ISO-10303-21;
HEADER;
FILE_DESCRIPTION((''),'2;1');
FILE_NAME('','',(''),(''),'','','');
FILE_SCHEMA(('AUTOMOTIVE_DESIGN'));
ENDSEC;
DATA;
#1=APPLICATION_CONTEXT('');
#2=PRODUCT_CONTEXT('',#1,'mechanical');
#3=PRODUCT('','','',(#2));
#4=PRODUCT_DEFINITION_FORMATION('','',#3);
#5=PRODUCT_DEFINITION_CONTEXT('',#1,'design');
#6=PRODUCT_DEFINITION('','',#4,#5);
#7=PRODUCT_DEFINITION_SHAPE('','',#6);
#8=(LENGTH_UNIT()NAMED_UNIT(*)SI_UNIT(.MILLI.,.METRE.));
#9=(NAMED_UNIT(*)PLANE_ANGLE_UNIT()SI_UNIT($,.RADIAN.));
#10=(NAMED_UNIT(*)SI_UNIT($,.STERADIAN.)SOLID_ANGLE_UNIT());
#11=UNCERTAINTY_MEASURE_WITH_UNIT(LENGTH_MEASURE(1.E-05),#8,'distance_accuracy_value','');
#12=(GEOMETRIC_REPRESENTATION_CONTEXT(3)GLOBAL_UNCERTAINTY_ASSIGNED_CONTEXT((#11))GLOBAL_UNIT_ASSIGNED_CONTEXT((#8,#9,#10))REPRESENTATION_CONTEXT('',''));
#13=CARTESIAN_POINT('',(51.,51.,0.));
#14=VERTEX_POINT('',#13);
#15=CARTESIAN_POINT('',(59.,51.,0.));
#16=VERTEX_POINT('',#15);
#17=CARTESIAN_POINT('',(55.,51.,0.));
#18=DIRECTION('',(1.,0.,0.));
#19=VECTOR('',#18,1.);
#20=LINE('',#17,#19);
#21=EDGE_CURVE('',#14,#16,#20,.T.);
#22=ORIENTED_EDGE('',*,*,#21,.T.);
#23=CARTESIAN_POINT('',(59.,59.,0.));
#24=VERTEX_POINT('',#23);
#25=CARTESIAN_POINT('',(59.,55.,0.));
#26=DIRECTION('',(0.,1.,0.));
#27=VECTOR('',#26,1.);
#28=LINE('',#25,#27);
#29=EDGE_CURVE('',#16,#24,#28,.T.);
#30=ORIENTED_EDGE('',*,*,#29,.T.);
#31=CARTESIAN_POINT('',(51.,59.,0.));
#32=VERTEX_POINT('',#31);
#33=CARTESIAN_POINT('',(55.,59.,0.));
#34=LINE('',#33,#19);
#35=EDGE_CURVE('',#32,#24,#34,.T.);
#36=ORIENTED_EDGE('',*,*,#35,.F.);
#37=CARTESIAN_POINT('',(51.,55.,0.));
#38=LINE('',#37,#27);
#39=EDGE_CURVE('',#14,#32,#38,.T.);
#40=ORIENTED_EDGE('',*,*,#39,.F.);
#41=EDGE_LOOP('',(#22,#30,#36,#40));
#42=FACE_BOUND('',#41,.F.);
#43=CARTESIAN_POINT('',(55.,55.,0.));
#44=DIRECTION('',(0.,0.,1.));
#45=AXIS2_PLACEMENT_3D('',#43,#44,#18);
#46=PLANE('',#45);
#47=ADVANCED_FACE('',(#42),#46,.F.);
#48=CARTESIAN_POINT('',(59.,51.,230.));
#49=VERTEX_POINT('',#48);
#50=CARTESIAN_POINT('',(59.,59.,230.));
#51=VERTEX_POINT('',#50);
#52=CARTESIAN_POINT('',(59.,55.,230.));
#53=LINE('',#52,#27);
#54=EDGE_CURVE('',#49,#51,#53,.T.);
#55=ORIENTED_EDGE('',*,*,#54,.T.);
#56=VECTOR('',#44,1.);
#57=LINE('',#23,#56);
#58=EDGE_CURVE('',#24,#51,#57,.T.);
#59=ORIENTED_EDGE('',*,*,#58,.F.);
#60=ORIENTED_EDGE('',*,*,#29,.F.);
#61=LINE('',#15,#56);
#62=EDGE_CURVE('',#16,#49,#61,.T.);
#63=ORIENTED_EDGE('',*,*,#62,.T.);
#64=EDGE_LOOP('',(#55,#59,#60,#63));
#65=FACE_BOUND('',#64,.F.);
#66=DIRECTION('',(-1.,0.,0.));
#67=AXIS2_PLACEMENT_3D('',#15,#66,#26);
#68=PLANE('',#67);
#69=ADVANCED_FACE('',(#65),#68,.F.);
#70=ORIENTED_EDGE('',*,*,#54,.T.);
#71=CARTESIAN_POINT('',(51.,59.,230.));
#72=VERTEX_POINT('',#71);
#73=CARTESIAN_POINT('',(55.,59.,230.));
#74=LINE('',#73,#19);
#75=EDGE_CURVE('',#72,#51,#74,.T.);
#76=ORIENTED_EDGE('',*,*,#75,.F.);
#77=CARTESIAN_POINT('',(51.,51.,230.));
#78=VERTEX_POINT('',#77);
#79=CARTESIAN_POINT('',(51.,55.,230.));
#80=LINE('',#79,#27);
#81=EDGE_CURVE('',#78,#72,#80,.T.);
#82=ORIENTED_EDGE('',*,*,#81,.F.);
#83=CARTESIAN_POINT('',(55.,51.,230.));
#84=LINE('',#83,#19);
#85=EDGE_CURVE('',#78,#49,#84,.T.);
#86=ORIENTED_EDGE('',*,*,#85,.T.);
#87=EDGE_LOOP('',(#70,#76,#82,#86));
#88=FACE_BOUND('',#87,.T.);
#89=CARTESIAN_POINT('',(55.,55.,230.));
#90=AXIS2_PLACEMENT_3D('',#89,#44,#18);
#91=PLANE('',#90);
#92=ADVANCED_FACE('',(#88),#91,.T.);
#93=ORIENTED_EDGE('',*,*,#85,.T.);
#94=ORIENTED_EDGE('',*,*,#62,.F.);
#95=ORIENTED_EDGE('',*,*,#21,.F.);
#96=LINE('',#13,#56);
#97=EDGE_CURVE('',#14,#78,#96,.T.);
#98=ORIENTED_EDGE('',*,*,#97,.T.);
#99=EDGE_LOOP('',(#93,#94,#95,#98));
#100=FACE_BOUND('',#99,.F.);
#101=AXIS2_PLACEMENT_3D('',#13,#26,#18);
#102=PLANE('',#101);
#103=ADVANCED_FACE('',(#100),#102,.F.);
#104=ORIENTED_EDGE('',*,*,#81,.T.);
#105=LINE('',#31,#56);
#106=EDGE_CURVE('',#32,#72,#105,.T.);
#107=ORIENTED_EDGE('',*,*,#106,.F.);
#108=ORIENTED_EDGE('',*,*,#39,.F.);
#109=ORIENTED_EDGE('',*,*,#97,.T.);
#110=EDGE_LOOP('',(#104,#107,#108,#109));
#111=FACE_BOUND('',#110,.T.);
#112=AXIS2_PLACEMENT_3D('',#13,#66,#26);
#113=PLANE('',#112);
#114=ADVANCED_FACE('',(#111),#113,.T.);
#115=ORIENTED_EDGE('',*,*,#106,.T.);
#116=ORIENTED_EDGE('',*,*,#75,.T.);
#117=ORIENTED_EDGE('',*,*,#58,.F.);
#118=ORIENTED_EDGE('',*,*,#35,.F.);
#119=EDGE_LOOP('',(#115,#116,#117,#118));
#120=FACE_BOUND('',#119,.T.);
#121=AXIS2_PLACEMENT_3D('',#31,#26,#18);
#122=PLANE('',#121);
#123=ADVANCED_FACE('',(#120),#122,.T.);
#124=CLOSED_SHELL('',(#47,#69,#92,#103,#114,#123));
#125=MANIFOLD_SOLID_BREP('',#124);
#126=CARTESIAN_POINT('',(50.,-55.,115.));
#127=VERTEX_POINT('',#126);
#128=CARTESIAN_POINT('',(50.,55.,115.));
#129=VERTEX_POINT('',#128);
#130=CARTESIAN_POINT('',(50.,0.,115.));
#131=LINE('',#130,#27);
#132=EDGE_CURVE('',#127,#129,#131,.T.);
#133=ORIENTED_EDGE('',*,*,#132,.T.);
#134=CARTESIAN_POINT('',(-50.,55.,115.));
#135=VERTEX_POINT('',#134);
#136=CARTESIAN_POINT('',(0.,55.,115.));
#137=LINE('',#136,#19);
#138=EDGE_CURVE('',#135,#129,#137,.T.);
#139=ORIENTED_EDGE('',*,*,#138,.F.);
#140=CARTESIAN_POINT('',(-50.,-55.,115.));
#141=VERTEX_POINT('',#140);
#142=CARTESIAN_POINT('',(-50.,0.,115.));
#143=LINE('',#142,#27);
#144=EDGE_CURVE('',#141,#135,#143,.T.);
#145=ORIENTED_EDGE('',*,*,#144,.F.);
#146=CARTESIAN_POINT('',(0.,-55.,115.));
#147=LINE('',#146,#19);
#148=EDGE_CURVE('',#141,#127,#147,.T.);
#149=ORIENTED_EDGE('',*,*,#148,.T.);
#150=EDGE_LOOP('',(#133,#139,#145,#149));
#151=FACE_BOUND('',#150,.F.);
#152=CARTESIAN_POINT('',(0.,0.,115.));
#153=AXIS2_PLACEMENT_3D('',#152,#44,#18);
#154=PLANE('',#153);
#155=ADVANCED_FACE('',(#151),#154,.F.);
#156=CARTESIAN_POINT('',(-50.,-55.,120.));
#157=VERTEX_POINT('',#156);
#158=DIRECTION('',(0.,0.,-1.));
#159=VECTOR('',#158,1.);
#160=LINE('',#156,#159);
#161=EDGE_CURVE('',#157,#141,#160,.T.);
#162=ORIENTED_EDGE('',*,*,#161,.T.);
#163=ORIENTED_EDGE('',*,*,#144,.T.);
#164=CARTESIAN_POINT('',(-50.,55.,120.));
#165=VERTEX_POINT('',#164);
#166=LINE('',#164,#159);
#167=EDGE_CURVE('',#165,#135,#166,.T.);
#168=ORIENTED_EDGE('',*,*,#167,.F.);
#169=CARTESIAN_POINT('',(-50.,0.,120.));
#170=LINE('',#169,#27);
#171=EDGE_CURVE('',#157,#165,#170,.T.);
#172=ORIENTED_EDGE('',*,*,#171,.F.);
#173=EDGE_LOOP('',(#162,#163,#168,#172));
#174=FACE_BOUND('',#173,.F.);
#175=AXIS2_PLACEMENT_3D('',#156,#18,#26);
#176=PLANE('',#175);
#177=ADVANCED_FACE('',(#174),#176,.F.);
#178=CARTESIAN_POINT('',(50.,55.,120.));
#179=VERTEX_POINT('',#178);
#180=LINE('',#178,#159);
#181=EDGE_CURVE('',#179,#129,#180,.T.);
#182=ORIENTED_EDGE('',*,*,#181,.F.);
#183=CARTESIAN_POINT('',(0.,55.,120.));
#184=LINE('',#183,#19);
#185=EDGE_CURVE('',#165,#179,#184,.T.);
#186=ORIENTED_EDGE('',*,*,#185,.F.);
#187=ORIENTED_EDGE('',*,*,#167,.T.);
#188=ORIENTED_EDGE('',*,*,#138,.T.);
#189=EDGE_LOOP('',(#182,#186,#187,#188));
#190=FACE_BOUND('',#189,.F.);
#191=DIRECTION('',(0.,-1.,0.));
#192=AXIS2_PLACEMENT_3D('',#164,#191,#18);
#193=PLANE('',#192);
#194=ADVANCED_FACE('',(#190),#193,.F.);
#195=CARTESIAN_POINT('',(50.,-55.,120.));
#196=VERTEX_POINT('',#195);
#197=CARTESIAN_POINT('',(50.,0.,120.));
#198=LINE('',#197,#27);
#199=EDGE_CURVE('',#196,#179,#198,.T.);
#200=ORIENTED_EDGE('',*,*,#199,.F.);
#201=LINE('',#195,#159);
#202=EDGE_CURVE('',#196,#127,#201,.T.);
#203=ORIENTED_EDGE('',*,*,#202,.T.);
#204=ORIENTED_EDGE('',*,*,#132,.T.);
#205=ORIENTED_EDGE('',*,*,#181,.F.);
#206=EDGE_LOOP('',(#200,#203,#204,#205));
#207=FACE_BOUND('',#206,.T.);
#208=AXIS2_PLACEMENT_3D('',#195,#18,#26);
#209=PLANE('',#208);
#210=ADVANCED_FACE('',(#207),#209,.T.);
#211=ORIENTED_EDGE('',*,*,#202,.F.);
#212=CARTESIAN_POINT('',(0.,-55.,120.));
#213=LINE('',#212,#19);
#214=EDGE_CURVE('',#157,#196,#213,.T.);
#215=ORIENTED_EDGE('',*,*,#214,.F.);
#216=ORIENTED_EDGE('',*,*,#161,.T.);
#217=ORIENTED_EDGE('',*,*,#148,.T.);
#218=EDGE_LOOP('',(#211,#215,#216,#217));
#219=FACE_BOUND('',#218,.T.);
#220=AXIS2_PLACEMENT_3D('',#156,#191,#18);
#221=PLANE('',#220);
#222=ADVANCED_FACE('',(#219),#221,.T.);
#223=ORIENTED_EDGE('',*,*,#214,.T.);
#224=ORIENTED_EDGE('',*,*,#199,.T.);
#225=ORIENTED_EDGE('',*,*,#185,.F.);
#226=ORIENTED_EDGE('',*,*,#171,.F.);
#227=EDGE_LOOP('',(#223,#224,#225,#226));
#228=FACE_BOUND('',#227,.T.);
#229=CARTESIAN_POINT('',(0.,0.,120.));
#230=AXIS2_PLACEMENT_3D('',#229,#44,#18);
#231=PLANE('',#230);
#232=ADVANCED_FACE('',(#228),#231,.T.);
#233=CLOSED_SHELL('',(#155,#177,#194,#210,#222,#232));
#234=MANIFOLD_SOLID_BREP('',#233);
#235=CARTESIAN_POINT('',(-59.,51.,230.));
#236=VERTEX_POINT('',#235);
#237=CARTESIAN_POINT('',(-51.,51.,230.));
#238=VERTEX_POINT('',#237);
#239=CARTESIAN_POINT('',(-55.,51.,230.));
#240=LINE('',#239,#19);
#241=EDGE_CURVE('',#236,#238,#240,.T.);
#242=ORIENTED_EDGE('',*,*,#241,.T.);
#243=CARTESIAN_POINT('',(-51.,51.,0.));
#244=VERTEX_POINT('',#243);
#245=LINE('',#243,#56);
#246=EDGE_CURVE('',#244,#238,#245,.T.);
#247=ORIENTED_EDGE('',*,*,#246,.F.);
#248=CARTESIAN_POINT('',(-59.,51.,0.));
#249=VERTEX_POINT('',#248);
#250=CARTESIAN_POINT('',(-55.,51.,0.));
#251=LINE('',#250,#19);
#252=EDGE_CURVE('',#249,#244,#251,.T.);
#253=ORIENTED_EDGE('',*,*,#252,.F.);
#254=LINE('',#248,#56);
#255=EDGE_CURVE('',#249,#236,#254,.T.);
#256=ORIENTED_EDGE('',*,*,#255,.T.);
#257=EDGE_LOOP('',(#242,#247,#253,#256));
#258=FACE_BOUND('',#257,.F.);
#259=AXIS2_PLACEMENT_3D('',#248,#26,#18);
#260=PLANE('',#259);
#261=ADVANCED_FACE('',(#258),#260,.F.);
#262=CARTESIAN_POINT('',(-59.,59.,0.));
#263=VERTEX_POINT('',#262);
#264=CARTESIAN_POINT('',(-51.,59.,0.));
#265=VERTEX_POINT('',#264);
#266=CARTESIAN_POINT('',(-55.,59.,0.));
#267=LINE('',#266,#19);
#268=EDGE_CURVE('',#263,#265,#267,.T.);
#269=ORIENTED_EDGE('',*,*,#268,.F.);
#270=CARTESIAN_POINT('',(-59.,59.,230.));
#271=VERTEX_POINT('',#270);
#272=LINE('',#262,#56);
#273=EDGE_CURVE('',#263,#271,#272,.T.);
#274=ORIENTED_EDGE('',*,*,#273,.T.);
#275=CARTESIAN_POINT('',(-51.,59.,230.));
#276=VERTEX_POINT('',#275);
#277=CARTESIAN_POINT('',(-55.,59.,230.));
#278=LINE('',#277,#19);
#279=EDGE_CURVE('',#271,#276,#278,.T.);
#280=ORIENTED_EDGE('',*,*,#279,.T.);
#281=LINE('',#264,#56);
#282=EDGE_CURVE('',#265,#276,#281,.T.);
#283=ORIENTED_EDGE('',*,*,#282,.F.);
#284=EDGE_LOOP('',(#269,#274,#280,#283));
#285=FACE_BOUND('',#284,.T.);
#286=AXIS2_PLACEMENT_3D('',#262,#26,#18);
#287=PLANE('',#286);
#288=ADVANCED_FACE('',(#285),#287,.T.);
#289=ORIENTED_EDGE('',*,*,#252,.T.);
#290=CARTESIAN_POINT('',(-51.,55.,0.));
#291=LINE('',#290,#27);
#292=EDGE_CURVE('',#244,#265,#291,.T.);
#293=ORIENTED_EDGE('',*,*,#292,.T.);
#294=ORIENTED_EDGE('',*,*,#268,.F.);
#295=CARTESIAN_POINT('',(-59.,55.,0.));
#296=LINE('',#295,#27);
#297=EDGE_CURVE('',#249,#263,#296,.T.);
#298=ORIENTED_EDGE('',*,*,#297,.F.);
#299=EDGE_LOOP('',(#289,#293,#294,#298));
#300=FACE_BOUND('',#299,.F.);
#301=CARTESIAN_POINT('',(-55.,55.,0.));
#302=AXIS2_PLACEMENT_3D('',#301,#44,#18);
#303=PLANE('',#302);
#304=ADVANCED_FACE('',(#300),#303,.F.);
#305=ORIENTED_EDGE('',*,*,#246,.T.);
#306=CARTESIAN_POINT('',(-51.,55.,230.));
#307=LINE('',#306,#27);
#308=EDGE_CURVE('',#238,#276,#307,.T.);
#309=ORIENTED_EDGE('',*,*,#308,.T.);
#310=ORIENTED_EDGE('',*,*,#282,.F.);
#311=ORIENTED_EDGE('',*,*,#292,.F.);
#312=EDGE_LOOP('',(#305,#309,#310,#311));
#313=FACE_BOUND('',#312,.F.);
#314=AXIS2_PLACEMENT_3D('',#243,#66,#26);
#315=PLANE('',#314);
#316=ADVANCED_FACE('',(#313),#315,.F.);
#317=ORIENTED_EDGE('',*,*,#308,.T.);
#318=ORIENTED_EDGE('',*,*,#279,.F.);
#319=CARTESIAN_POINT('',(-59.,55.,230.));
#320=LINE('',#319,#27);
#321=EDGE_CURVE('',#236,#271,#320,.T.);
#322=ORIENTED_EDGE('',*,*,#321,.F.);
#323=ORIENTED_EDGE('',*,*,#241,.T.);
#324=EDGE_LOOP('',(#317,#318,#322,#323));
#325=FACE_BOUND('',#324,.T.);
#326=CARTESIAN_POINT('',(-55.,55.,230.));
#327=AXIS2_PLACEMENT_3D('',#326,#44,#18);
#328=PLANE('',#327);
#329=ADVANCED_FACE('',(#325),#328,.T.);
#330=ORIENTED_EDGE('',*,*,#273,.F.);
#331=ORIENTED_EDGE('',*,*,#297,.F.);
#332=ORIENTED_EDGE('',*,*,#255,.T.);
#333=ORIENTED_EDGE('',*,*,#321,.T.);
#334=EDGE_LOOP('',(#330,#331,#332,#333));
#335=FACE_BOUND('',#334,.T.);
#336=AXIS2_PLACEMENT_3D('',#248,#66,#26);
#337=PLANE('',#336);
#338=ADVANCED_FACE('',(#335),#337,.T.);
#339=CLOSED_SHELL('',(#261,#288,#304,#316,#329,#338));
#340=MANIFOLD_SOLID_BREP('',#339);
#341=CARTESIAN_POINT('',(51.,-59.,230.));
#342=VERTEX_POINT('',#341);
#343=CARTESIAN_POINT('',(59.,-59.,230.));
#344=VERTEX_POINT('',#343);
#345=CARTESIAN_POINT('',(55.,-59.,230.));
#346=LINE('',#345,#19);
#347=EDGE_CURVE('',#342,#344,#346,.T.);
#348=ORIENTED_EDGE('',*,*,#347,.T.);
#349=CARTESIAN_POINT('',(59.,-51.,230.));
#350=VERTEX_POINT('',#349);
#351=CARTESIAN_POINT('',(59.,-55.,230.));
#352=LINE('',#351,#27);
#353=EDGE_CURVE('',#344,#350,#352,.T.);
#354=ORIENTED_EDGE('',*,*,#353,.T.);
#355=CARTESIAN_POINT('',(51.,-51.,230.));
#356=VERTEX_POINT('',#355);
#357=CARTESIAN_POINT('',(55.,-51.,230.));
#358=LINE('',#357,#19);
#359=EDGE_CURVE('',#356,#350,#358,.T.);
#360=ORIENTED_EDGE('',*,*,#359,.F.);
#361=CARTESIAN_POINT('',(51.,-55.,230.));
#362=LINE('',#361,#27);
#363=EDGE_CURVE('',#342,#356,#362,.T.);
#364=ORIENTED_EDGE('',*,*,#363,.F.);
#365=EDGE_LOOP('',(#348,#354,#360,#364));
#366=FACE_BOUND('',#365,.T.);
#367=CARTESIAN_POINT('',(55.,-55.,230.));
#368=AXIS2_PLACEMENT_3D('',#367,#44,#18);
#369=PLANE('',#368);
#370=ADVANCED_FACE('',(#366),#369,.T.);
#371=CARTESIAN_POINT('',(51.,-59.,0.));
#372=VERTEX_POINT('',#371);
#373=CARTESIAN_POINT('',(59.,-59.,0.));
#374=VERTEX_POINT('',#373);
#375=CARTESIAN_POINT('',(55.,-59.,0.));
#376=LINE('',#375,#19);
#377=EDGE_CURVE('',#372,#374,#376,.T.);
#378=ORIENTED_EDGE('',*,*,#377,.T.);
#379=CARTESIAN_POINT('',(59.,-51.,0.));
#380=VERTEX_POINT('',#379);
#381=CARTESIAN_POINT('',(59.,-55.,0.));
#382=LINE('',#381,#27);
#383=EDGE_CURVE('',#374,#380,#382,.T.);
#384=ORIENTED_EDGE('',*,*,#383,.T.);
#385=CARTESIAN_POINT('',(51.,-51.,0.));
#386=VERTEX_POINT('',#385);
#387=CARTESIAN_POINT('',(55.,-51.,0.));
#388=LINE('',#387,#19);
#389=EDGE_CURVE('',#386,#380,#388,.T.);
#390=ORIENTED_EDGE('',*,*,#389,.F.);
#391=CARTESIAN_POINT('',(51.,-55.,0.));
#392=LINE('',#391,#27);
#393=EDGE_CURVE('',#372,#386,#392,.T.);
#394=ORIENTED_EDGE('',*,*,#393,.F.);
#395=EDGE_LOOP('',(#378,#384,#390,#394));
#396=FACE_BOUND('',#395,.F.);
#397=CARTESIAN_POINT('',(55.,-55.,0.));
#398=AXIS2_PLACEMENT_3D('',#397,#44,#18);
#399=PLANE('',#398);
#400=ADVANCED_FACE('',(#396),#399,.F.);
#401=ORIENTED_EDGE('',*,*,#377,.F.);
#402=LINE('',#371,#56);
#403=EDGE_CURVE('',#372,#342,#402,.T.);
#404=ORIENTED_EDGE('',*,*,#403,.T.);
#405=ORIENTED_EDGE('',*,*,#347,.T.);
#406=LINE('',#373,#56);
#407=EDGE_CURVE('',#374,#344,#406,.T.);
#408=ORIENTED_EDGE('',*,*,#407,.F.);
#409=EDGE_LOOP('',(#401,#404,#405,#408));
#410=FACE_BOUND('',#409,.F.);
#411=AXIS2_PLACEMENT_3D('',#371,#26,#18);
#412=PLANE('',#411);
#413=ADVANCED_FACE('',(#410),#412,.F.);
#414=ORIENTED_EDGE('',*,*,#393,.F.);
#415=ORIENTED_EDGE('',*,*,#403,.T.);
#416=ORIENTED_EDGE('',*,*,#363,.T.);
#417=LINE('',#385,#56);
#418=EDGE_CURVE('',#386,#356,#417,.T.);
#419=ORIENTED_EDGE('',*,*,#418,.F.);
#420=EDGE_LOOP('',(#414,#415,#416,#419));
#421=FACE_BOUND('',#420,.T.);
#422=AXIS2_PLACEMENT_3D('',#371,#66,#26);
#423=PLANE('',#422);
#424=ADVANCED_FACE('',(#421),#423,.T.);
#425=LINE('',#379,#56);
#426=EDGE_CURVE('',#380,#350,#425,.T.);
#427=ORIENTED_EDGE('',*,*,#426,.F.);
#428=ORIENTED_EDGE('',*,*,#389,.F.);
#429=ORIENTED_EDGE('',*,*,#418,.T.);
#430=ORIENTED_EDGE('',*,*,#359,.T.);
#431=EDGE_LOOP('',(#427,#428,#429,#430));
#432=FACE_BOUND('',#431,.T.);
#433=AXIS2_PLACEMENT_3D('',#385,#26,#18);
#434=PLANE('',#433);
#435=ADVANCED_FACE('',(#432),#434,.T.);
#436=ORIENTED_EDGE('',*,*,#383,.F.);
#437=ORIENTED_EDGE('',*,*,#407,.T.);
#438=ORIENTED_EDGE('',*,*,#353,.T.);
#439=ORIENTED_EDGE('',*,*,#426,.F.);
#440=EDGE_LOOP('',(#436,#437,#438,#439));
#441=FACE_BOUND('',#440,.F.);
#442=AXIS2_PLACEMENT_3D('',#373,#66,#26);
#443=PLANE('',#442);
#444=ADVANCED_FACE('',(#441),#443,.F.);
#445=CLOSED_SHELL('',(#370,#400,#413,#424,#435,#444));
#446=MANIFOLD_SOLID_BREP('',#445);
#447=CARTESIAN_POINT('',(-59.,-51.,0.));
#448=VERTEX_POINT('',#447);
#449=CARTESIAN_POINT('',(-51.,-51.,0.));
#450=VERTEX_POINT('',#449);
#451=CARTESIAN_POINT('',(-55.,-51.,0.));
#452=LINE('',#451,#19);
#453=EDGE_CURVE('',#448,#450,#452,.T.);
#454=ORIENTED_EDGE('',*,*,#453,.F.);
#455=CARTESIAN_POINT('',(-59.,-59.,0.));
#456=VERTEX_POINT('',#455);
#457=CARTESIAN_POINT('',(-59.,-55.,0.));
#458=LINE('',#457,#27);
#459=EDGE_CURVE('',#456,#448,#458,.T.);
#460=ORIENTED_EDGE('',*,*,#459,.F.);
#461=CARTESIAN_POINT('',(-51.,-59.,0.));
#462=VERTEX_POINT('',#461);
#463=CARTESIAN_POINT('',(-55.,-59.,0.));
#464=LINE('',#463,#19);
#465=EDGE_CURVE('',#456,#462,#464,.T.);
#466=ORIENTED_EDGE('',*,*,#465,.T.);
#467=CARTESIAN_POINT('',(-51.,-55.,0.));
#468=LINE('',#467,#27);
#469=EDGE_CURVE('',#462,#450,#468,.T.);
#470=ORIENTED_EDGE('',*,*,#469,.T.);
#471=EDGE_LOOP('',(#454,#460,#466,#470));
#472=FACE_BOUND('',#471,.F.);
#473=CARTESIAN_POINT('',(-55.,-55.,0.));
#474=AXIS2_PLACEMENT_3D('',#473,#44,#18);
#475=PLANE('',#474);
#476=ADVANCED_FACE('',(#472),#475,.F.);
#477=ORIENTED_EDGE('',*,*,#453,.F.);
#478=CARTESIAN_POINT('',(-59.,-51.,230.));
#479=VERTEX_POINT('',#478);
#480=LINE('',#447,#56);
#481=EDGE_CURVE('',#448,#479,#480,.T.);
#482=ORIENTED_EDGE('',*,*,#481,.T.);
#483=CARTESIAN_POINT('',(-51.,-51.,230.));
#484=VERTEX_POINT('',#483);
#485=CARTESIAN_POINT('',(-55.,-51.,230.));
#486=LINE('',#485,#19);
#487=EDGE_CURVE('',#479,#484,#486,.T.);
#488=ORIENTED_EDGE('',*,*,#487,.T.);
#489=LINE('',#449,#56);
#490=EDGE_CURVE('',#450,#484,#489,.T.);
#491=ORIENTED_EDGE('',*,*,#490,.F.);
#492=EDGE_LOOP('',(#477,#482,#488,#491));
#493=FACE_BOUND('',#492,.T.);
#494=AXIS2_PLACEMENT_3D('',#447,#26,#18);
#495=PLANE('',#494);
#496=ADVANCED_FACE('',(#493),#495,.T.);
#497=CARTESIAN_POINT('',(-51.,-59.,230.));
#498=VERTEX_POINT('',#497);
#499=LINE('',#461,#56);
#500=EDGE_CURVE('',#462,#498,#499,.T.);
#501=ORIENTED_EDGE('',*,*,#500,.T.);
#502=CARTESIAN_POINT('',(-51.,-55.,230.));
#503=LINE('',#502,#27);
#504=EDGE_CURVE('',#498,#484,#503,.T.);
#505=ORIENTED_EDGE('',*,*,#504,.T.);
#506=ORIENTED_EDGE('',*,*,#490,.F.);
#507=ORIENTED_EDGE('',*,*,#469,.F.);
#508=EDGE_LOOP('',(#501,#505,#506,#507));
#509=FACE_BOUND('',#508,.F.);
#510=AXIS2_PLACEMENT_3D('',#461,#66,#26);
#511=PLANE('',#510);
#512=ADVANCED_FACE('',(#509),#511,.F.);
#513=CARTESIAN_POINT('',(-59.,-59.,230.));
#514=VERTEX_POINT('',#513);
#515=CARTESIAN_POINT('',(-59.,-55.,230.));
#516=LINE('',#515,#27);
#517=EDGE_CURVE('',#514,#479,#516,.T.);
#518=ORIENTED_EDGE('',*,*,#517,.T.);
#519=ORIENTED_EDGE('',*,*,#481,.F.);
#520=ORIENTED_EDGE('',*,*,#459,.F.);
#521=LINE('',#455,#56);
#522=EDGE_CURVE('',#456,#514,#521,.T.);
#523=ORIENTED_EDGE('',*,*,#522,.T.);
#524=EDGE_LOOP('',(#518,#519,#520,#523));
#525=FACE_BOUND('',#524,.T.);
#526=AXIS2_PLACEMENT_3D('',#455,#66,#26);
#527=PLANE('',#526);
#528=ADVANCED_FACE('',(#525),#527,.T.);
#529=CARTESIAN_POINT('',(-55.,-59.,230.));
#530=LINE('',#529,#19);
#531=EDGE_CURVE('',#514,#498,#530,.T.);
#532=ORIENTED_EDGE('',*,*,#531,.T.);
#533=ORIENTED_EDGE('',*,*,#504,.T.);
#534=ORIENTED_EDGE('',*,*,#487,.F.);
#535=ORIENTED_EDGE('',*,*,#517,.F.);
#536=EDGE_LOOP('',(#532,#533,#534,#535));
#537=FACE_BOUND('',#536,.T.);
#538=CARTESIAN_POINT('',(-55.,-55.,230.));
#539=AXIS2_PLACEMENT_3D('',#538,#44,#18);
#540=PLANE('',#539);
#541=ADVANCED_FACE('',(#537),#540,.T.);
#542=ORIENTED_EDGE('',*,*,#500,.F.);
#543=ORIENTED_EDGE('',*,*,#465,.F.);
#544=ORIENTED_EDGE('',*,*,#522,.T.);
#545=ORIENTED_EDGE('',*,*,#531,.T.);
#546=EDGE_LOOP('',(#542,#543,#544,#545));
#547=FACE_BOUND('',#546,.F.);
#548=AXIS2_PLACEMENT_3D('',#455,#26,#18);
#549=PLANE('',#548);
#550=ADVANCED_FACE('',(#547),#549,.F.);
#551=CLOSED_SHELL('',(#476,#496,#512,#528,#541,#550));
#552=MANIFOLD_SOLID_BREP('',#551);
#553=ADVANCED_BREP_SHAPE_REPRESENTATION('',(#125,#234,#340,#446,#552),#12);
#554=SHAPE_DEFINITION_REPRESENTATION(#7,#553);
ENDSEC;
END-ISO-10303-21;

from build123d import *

# Parameters (mm, degrees)
F0_W     = 8
F0_H     = 8
F1_DEPTH = 230
F3_W     = 100
F3_H     = 110
F4_DEPTH = 5


# Not quite as in the source:
# - the program builds the solid bodies; features that only make, move or delete a surface that nothing else refers to are left out


with BuildPart() as f1:
    # F0 (on Top) → F1 (new body)
    with BuildSketch(Plane.XY):
        with Locations((-55, 55)):
            Rectangle(F0_W, F0_H)
    extrude(amount=F1_DEPTH)


with BuildPart() as f1b:
    # F0 (on Top) → F1, piece 2 (new body)
    with BuildSketch(Plane.XY):
        with Locations((-55, -55)):
            Rectangle(F0_W, F0_H)
    extrude(amount=F1_DEPTH)


with BuildPart() as f1c:
    # F0 (on Top) → F1, piece 3 (new body)
    with BuildSketch(Plane.XY):
        with Locations((55, 55)):
            Rectangle(F0_W, F0_H)
    extrude(amount=F1_DEPTH)


with BuildPart() as f1d:
    # F0 (on Top) → F1, piece 4 (new body)
    with BuildSketch(Plane.XY):
        with Locations((55, -55)):
            Rectangle(F0_W, F0_H)
    extrude(amount=F1_DEPTH)


with BuildPart() as f4:
    # F3 (on offset) → F4 (new body)
    with BuildSketch(Plane.XY.offset(120)):
        Rectangle(F3_W, F3_H)
    extrude(amount=-F4_DEPTH)


solid = Compound([f1.part, f1b.part, f1c.part, f1d.part, f4.part])
